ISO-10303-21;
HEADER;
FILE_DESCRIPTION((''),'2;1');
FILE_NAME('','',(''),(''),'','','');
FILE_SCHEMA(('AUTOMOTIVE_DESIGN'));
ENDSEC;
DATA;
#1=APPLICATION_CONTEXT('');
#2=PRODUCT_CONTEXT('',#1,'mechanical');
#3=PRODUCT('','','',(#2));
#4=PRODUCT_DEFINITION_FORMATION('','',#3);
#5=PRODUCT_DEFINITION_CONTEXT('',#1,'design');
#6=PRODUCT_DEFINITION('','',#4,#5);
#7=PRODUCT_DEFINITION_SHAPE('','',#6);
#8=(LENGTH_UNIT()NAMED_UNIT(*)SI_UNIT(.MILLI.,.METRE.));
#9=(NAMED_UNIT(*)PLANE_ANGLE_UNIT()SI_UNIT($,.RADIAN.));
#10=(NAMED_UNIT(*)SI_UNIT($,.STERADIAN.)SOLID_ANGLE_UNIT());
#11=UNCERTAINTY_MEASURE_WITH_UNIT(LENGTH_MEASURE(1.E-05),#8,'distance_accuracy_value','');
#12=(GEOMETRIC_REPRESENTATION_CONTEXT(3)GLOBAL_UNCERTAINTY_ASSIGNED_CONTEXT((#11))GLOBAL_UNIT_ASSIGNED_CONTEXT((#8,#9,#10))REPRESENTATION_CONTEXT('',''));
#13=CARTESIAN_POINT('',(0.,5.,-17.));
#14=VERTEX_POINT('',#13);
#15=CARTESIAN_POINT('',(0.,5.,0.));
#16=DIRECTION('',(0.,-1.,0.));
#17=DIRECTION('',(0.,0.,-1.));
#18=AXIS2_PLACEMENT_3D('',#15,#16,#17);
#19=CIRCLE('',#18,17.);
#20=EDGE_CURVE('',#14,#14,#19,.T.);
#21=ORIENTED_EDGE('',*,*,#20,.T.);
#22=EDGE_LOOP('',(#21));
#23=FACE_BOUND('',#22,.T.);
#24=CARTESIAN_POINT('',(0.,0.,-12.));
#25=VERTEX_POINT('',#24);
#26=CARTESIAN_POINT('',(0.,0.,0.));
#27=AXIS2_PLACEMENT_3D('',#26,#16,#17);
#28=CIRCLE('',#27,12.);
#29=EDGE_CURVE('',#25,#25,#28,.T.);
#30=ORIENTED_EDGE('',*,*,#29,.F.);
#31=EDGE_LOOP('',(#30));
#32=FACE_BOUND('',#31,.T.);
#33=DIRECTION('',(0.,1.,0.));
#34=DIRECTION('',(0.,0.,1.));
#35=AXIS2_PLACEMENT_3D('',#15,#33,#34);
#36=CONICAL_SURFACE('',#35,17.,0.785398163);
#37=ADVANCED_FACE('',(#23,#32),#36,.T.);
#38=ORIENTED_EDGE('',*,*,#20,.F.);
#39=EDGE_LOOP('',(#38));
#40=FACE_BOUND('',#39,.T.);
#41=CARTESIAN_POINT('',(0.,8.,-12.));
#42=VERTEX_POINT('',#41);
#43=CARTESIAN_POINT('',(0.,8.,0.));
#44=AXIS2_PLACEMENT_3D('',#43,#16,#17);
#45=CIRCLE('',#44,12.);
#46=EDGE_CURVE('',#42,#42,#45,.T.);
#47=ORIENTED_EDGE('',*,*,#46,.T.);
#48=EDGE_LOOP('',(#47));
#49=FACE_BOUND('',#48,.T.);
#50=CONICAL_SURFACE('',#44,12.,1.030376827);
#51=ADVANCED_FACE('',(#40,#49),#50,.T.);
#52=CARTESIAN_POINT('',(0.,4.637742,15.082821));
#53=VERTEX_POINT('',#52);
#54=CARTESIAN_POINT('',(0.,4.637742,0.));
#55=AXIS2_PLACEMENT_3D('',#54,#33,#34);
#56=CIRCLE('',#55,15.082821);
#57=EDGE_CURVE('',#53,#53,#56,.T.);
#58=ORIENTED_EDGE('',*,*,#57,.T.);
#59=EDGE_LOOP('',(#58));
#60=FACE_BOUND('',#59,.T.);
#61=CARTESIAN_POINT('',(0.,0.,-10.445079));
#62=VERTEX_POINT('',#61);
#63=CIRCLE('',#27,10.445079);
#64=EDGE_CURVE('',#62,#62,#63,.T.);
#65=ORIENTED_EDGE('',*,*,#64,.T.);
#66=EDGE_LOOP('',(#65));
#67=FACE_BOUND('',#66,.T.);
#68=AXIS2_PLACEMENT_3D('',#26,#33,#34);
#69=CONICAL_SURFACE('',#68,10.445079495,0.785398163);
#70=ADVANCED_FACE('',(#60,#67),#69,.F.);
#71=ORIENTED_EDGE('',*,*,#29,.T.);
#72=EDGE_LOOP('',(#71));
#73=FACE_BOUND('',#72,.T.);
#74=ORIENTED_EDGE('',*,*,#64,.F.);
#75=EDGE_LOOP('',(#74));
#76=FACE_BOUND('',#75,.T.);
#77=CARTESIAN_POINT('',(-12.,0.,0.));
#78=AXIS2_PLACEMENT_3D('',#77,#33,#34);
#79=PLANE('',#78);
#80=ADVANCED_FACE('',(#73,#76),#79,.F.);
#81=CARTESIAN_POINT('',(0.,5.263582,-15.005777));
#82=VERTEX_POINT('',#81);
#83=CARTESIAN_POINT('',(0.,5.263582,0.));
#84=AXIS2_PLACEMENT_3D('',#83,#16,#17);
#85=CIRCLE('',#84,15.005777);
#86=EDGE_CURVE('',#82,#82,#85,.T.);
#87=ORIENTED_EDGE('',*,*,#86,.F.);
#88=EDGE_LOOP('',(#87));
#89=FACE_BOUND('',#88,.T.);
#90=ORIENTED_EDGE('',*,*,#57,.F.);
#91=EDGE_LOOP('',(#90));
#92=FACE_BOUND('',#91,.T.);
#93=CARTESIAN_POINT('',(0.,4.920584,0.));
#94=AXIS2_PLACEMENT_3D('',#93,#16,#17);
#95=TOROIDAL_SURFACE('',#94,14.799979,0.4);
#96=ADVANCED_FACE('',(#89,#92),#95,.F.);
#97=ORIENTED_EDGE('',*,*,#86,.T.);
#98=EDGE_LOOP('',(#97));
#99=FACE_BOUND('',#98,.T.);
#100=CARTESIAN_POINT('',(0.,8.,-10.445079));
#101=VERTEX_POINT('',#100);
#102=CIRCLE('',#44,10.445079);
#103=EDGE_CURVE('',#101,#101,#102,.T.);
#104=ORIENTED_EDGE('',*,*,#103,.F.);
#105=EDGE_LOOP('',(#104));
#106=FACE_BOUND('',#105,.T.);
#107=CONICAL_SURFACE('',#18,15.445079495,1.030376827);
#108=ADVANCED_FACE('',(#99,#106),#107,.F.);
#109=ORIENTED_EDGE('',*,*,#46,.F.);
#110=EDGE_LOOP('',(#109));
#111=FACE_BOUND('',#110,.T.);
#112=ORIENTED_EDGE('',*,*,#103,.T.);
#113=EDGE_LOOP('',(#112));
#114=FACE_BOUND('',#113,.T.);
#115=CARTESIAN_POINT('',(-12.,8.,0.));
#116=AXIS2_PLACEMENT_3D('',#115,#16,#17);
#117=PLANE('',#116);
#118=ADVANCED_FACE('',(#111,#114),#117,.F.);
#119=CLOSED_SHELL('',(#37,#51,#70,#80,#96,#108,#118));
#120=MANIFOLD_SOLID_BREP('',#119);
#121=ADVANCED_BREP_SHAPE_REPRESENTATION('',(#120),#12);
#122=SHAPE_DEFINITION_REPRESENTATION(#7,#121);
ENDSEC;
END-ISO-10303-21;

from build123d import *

# Parameters (mm, degrees)
FILLET1_R = 0.4


# Read off the part's stored shape, not the designer's step: Revolve1
with BuildPart() as part:
    # Revolve1 outline → Revolve1 (revolve)
    with BuildSketch(Plane.XY):
        Polygon((15.445079495, 5), (10.445079495, 0), (12, 0), (17, 5), (12, 8), (10.445079495, 8), align=None)
    revolve(axis=Axis((0, 0, 0), (0, 1, 0)))

    # Fillet1
    fillet1_edges = [part.edges().sort_by_distance(p)[0] for p in [
        (-15.445079495, 5, 0),
    ]]
    fillet(fillet1_edges, radius=FILLET1_R)


solid = part.part
